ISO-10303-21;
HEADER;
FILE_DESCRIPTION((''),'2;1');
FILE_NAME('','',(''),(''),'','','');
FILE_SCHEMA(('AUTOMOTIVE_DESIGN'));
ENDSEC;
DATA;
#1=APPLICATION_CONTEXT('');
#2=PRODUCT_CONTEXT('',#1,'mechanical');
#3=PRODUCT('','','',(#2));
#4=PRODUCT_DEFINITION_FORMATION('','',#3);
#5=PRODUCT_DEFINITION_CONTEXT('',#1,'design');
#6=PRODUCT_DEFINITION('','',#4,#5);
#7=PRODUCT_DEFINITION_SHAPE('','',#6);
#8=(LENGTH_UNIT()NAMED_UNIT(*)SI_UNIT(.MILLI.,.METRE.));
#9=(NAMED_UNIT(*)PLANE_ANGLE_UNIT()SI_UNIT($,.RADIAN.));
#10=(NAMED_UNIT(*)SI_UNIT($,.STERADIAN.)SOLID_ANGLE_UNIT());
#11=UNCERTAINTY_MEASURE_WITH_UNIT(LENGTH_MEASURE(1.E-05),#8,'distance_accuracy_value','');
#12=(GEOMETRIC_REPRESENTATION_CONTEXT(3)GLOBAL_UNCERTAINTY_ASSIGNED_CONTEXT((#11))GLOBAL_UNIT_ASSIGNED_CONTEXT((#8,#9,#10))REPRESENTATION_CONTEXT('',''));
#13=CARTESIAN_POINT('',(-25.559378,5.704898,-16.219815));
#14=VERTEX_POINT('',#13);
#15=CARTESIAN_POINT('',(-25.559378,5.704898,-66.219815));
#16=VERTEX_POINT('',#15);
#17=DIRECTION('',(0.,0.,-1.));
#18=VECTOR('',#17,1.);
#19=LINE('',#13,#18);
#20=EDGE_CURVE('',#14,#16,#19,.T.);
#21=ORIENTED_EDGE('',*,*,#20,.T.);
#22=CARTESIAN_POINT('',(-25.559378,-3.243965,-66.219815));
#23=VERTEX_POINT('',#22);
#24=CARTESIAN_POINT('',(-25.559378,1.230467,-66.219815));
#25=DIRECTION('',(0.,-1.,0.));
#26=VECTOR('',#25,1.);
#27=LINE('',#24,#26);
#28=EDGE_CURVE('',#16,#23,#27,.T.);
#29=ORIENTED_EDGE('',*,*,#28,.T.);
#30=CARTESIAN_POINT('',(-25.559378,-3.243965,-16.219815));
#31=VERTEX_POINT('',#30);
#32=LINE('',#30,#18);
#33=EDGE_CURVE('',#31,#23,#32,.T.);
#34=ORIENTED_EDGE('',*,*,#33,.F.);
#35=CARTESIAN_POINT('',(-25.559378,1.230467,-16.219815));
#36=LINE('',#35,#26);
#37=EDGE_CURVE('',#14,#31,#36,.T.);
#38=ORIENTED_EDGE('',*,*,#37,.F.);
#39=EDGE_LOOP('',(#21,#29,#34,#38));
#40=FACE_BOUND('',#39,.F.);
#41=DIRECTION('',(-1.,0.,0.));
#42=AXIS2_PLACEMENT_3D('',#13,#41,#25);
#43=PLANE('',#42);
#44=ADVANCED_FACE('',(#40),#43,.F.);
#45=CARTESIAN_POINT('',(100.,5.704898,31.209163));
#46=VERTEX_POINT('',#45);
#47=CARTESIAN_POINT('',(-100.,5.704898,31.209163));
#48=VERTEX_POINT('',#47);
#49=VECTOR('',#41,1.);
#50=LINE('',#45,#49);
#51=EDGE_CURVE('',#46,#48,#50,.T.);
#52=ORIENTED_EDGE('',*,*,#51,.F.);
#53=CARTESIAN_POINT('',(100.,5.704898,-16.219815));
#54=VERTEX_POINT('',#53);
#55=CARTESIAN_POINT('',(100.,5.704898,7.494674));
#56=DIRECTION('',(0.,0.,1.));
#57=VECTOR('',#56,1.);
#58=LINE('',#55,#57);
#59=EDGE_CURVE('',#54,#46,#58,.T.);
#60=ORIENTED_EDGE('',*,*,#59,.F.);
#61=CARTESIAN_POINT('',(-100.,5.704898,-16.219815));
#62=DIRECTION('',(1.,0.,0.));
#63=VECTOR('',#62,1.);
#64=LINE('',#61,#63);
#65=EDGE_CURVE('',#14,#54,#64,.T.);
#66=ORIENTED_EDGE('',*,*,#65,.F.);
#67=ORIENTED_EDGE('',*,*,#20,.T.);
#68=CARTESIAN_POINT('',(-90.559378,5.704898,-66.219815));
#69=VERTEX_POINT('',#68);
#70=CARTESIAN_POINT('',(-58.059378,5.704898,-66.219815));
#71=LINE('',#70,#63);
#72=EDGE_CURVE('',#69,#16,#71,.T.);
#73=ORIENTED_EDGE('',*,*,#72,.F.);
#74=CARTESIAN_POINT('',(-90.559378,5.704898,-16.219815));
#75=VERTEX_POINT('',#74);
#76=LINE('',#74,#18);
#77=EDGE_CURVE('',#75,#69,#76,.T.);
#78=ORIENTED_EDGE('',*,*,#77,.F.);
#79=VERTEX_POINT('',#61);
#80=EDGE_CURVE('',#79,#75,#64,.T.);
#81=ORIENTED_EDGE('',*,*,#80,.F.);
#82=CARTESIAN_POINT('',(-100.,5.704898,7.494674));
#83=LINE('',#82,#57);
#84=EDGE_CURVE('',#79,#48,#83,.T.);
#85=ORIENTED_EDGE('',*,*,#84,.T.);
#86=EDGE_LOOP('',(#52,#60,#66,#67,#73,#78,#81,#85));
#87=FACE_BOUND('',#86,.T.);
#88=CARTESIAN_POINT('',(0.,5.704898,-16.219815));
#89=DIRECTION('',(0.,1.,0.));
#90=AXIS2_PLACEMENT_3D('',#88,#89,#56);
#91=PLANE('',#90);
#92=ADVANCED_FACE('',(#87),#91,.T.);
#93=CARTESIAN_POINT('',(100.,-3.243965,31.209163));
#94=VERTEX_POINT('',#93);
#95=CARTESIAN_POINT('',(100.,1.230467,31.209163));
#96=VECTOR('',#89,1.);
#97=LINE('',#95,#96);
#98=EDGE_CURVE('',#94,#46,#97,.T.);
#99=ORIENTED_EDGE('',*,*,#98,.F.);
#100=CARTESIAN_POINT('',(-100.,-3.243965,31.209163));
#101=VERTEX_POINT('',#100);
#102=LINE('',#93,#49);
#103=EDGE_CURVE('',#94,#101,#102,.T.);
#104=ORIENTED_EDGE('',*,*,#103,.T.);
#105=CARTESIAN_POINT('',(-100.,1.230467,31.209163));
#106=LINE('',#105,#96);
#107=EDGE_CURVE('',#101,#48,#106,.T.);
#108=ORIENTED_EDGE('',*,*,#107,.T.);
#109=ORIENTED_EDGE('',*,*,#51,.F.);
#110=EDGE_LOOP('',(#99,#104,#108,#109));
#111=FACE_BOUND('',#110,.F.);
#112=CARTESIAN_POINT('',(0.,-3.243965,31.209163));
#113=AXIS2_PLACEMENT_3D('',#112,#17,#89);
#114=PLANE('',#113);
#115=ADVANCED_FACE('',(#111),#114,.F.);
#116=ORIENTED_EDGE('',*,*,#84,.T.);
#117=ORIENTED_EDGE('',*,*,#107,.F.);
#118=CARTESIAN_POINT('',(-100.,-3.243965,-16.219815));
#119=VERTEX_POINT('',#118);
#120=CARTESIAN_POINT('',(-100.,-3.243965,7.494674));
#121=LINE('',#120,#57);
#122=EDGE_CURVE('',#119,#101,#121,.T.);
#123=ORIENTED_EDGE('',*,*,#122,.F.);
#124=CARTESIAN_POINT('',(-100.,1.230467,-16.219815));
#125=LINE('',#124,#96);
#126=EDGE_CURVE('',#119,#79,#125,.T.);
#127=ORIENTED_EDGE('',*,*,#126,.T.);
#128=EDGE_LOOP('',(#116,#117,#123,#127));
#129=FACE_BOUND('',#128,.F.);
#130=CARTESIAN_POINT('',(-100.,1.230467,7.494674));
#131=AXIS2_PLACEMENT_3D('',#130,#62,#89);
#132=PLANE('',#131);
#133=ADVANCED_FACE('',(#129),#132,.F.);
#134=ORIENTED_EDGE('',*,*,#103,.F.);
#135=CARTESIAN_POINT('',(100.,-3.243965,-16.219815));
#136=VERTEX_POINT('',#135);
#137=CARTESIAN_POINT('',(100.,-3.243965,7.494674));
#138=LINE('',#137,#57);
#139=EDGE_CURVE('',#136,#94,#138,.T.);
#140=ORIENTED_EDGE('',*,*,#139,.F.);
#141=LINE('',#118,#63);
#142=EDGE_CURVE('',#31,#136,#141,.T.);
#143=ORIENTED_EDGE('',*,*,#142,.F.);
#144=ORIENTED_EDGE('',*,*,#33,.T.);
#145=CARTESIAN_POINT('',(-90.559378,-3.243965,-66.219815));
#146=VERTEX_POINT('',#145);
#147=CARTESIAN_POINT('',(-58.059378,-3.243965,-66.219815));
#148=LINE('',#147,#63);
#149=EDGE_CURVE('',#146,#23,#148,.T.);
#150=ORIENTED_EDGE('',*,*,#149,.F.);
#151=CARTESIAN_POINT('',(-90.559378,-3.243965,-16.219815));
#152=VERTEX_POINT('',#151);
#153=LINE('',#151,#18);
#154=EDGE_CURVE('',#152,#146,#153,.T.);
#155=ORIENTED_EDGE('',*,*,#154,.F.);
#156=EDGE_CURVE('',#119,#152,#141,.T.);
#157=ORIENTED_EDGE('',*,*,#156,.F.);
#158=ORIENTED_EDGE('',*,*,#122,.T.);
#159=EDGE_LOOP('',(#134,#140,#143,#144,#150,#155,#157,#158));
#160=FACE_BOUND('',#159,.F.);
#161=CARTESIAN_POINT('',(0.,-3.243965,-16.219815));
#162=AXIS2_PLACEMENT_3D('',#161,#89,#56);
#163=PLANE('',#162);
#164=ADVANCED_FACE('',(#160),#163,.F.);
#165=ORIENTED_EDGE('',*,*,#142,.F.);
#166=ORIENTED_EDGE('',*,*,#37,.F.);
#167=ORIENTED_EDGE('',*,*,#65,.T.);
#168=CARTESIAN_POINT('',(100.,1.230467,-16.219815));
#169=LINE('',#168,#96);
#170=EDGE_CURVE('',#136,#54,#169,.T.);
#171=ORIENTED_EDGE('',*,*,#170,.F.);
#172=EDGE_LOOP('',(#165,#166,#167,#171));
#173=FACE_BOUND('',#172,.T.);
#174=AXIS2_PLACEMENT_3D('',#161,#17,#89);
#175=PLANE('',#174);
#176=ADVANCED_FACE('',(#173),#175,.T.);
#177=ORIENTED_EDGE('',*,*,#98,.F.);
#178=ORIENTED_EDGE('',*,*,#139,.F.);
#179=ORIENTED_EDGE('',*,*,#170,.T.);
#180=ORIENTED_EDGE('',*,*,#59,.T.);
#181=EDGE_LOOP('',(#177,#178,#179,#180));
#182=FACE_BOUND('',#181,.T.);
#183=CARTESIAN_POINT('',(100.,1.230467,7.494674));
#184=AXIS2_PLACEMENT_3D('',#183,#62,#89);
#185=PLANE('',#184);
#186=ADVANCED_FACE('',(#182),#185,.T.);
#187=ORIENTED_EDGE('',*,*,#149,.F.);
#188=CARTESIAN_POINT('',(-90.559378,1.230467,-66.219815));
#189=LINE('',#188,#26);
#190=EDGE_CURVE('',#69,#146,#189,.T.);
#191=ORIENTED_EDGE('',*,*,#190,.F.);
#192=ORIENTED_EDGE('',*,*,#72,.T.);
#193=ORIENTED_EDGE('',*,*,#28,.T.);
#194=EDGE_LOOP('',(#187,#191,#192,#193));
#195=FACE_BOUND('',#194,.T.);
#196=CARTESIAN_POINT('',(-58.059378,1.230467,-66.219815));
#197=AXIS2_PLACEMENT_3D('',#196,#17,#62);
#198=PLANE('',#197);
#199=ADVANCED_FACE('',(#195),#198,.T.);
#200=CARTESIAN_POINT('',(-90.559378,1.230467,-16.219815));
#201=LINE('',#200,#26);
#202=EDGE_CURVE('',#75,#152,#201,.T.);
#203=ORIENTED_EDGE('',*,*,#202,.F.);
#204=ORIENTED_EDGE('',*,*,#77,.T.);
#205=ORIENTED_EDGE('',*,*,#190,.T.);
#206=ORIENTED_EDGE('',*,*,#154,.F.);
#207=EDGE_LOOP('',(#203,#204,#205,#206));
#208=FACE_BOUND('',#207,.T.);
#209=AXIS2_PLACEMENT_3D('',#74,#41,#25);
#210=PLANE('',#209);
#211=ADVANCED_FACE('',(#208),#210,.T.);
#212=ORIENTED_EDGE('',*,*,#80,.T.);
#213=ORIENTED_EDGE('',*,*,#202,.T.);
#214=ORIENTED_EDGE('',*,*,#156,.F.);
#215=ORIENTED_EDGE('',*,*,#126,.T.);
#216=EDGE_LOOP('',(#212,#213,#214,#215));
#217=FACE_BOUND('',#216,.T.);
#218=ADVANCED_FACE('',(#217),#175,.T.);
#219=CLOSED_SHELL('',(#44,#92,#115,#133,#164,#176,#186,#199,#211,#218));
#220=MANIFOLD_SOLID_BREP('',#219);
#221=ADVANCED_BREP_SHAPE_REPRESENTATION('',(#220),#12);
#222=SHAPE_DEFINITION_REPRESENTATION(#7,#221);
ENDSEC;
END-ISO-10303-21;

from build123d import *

# Parameters (mm, degrees)
F9_W      = 8.9488632511
F9_H      = 47.4289786071
F10_DEPTH = 100
F11_W     = 65
F11_H     = 8.9488632511
F12_DEPTH = 50


# Not quite as in the source:
# - a feature of the source that left no trace in its solid (it failed there, or was rolled back) is left out
# - the program builds the solid bodies; features that only make, move or delete a surface that nothing else refers to are left out


with BuildPart() as f10:
    # F9 (on Right) → F10 (new body, symmetric)
    with BuildSketch(Plane.YZ):
        with Locations((1.2304667616, 7.4946740642)):
            Rectangle(F9_W, F9_H)
    extrude(amount=F10_DEPTH, both=True)

    # F11 (on face) → F12 (join)
    with BuildSketch(Plane(origin=(0, 0, -16.2198152393), x_dir=(1, 0, 0), z_dir=(0, 0, -1))):
        with Locations((-58.0593782663, -1.2304667616)):
            Rectangle(F11_W, F11_H)
    extrude(amount=F12_DEPTH)


solid = f10.part
